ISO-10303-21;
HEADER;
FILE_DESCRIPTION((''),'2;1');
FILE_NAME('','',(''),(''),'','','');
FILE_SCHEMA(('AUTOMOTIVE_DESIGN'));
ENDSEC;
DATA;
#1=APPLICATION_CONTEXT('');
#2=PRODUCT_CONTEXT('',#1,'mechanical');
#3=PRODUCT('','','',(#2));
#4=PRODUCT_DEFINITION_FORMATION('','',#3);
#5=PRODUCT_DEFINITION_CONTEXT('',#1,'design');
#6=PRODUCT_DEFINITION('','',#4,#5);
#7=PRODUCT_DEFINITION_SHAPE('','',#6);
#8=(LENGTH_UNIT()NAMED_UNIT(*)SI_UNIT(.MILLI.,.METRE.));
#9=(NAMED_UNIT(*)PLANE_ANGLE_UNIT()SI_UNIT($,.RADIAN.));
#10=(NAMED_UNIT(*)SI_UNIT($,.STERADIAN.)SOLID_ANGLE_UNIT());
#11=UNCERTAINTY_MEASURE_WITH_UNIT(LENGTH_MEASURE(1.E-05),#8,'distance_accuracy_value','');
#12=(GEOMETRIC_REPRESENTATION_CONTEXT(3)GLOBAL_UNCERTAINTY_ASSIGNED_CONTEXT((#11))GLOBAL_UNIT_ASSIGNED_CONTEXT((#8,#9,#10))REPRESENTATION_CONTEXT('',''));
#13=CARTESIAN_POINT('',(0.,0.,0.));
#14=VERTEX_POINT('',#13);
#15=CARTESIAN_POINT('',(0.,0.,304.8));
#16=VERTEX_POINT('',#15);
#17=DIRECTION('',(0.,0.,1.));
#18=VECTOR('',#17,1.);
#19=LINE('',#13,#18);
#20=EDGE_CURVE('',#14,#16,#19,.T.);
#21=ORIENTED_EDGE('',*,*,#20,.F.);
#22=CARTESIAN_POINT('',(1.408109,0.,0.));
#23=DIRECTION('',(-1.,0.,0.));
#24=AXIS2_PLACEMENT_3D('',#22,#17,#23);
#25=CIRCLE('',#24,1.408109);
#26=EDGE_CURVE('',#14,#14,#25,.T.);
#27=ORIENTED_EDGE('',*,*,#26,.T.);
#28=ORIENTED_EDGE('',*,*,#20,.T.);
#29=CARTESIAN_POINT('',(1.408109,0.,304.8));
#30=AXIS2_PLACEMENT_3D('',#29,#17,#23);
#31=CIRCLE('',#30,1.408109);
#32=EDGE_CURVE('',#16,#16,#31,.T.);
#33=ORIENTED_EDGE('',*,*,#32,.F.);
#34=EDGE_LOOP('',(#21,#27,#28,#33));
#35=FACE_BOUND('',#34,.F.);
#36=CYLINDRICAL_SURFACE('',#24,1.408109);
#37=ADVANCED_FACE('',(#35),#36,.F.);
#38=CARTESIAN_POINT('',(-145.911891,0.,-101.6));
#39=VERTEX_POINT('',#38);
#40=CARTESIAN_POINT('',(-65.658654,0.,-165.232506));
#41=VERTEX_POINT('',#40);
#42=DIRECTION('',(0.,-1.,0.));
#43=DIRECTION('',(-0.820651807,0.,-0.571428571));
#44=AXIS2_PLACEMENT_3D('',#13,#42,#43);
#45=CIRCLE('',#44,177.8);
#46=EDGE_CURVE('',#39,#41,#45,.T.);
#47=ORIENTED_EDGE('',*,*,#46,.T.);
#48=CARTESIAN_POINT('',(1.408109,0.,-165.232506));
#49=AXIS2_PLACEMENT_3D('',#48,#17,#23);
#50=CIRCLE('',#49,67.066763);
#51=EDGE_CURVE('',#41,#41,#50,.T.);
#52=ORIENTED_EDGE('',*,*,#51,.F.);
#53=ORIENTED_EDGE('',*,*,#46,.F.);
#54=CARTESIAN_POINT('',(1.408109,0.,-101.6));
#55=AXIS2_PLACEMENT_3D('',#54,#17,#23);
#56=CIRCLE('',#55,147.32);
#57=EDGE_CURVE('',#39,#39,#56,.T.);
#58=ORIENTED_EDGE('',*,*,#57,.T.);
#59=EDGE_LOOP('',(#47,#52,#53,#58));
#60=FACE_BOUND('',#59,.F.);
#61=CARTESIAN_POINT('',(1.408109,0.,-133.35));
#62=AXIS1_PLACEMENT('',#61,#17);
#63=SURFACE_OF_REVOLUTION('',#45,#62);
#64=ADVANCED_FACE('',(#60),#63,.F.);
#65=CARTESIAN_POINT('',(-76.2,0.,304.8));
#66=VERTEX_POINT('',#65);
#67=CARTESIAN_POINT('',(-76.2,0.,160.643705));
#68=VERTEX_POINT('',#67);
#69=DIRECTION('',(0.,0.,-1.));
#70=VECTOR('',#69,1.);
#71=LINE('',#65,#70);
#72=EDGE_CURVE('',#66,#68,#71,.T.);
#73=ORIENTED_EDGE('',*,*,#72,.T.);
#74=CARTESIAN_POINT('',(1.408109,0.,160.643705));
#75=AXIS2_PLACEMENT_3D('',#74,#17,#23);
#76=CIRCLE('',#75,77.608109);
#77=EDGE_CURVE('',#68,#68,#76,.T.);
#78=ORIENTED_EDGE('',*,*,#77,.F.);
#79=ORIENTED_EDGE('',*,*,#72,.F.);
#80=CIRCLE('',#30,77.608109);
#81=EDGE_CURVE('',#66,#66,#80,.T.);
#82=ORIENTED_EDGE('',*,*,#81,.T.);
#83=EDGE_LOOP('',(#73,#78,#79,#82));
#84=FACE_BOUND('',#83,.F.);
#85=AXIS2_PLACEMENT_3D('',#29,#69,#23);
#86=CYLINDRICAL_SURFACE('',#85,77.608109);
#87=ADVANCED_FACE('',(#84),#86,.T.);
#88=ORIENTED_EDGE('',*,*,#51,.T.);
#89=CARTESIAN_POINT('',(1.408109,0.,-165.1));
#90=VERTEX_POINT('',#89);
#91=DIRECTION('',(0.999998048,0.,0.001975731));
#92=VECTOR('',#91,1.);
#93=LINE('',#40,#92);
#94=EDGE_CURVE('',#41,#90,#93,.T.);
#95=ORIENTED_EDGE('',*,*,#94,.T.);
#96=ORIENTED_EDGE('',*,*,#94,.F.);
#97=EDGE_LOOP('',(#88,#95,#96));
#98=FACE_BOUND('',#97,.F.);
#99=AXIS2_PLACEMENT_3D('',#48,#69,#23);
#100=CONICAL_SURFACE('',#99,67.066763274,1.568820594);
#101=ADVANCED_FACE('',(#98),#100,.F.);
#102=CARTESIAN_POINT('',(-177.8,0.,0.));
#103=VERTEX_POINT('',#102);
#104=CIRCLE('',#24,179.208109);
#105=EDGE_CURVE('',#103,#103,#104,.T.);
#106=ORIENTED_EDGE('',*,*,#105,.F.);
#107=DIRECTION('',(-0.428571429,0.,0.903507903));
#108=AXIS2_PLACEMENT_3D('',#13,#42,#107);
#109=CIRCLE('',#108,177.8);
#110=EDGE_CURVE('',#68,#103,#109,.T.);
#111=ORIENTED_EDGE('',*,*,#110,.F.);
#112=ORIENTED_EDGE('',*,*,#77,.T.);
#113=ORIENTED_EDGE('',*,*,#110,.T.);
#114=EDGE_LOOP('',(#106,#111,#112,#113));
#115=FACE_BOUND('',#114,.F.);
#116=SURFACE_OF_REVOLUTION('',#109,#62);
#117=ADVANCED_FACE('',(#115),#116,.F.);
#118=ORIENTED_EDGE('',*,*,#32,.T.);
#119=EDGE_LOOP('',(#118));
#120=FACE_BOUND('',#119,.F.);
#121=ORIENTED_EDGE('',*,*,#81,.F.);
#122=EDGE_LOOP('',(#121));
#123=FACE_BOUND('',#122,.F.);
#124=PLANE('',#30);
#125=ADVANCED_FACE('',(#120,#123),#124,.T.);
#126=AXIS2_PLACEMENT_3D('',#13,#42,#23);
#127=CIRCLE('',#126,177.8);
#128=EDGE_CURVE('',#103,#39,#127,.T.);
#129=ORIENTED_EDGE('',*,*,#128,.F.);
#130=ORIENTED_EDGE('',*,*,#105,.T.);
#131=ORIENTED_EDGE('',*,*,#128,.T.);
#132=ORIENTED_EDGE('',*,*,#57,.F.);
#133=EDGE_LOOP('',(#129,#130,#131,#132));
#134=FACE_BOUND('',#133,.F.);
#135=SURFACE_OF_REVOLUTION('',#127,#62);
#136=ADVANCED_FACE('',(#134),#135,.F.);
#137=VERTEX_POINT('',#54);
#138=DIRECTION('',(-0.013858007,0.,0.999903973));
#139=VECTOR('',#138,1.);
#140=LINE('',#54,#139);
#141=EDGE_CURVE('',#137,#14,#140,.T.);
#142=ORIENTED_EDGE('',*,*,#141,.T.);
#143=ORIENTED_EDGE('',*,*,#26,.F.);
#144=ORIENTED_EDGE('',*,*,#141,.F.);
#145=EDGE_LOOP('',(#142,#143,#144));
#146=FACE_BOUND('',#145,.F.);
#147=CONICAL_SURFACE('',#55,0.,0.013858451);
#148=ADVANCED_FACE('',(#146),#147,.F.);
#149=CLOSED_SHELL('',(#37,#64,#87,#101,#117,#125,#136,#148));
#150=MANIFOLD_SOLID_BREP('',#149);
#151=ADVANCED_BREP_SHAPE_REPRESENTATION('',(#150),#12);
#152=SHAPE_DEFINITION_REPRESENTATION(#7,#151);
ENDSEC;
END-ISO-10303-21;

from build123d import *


# Not quite as in the source:
# - ends of sketch curves that miss each other by under 0.0002 mm in the source are joined
# - a feature names something its author has since deleted; it is built from what else it names


with BuildPart() as f1:
    # F0 (on Front) → F1 (revolve)
    with BuildSketch(Plane.XZ):
        with BuildLine():
            Line((-124.4340789334, 127), (0, 127))
            Line((0, 127), (0, 177.8))
            ThreePointArc((0, 177.8), (-39.0537400688, 173.4579066709), (-76.2, 160.6437051366))
            ThreePointArc((-76.2, 160.6437051366), (-101.7176317641, 145.8299125293), (-124.4340789334, 127))
        make_face()
        with BuildLine():
            Line((-177.8, 0), (0, 0))
            Line((0, 0), (0, 127))
            Line((0, 127), (-124.4340789334, 127))
            ThreePointArc((-124.4340789334, 127), (-163.9164563275, 68.8784098615), (-177.8, 0))
        make_face()
        with BuildLine():
            Line((1.4081087779, -101.6), (0, 0))
            Line((0, 0), (-177.8, 0))
            ThreePointArc((-177.8, 0), (-169.6407590458, -53.2433363939), (-145.9118912221, -101.6))
            Line((-145.9118912221, -101.6), (1.4081087779, -101.6))
        make_face()
        with BuildLine():
            Line((1.4081087779, -165.1), (1.4081087779, -101.6))
            Line((1.4081087779, -101.6), (-145.9118912221, -101.6))
            ThreePointArc((-145.9118912221, -101.6), (-110.4662750061, -139.3199270969), (-65.6586544962, -165.2325061534))
            Line((-65.6586544962, -165.2325061534), (1.4081087779, -165.1))
        make_face()
        with BuildLine():
            ThreePointArc((-76.2, 160.6437051366), (-39.0537400688, 173.4579066709), (0, 177.8))
            Line((0, 177.8), (0, 304.8))
            Line((0, 304.8), (-76.2, 304.8))
            Line((-76.2, 304.8), (-76.2, 160.6437051366))
        make_face()
    revolve(axis=Axis((1.4081087779, 0, -133.35), (0, 0, 1)))


solid = f1.part
